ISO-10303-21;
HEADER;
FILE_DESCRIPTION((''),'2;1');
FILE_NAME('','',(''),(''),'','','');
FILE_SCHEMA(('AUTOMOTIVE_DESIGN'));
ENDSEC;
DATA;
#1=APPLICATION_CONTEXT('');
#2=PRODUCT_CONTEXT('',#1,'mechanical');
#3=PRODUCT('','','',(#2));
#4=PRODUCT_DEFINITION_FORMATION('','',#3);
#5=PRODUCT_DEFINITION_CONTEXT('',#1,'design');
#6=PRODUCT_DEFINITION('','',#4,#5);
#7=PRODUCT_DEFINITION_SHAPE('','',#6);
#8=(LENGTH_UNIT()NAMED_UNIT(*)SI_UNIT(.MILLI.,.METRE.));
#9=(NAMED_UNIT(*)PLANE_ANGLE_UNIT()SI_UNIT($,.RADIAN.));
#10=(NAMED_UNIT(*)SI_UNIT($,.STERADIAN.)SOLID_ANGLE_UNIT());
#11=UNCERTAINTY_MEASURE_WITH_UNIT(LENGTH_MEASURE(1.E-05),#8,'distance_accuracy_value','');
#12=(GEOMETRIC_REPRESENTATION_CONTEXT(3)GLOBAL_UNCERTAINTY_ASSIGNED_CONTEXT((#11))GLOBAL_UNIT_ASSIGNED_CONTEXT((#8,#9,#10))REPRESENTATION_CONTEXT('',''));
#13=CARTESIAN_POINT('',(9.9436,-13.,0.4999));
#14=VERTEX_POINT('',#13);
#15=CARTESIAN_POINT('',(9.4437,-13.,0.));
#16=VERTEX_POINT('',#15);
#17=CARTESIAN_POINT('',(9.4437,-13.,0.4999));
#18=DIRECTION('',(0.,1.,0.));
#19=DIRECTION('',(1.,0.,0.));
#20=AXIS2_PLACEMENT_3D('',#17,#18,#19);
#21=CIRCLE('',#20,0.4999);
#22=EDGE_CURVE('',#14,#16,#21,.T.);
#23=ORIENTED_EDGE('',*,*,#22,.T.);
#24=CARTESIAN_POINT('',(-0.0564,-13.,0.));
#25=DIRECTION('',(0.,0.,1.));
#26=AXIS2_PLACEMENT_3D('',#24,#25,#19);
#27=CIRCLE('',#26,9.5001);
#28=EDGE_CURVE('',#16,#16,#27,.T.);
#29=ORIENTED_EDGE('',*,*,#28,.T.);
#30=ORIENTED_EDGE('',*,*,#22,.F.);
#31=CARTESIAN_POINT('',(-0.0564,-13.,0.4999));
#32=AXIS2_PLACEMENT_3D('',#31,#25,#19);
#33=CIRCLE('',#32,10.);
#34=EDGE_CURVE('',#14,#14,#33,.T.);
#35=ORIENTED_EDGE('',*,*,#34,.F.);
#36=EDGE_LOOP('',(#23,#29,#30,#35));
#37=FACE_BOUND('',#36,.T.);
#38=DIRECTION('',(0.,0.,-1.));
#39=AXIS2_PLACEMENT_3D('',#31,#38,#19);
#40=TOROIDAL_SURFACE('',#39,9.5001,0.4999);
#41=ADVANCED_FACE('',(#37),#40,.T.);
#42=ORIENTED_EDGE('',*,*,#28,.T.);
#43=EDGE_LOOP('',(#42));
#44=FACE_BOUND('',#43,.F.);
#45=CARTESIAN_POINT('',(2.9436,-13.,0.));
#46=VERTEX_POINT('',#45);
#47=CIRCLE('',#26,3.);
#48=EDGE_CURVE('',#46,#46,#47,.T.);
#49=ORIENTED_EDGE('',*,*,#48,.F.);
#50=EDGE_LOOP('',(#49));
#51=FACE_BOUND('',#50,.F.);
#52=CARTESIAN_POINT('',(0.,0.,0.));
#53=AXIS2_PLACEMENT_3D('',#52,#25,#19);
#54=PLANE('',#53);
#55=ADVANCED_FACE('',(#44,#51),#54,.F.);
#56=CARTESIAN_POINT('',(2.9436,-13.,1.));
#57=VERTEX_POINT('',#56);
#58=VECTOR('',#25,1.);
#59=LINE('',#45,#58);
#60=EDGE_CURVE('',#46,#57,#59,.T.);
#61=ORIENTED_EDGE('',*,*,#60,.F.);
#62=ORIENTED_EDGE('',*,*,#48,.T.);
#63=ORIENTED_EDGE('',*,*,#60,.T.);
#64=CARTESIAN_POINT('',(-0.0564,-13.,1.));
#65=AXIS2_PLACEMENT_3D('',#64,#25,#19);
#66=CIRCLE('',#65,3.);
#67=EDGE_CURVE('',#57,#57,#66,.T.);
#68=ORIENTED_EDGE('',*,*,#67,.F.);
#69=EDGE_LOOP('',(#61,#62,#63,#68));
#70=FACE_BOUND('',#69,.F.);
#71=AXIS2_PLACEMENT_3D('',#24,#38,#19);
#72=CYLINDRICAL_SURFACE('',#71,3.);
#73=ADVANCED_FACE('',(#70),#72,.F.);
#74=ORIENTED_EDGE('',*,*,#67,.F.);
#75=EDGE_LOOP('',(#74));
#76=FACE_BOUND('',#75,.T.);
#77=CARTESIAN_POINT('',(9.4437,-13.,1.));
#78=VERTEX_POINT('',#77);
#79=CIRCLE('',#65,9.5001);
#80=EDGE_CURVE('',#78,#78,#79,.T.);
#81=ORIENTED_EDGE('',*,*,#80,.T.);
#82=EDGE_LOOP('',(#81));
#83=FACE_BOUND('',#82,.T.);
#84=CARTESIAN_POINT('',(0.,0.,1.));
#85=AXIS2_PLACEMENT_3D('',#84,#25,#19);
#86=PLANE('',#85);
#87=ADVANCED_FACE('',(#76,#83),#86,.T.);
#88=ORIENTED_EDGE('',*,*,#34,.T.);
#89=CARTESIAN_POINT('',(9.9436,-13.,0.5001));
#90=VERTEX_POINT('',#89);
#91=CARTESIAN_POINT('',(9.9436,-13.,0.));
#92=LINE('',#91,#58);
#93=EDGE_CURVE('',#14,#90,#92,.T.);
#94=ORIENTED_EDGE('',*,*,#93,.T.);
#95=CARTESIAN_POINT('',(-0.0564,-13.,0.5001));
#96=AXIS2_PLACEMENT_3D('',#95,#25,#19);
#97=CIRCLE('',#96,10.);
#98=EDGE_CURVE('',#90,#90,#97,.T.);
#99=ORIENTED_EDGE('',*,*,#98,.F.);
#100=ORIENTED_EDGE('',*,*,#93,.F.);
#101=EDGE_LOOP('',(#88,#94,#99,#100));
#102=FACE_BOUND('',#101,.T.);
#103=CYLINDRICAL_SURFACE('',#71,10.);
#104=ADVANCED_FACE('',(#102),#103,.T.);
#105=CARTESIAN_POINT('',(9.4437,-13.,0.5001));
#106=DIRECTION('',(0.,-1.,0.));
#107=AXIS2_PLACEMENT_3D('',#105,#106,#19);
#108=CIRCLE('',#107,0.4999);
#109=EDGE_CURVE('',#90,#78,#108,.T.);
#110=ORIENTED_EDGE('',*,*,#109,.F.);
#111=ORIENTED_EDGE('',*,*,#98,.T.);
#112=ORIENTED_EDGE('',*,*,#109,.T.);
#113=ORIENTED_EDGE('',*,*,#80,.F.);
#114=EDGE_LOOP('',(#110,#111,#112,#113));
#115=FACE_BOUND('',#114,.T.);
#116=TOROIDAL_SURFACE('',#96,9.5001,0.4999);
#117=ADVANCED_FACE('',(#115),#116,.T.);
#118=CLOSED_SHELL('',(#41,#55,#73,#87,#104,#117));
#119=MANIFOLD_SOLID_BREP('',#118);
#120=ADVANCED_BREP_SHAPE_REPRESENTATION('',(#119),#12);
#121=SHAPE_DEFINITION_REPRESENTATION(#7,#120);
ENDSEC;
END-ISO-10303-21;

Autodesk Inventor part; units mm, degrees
ref_plane "YZ Plane" through (0, 0, 0) normal (1, 0, 0) x (0, 1, 0)
ref_plane "XZ Plane" through (0, 0, 0) normal (0, 1, 0) x (-1, 0, 0)
ref_plane "XY Plane" through (0, 0, 0) normal (0, 0, 1) x (1, 0, 0)
ref_plane "Płaszczyzna konstrukcyjna1" through (0, 0, 0) normal (0, 0, 1) x (1, 0, 0)
sketch "Szkic1" plane through (0, 0, 0) normal (0, 0, 1) x (1, 0, 0)
  circle A0 centre (-0.0564, -13) radius 3 projected
  circle A1 centre (-0.0564, -13) radius 3
  circle A2 centre (-0.0564, -13) radius 10
  point P0 (0, 0)
  dimension "d0" = 6
  dimension "d1" = 20
extrude "Wyciągnięcie proste1" add sketch "Szkic1" along normal blind 1
full round fillet "Zaokrąglenie1" first side at (7.4844, -14.037, 1) centre faces at (9.9112, -13.8047, 0.6667) second side at (7.4844, -14.037, 0)
properties part number "podkl" material "Stal, galwanizowana"
